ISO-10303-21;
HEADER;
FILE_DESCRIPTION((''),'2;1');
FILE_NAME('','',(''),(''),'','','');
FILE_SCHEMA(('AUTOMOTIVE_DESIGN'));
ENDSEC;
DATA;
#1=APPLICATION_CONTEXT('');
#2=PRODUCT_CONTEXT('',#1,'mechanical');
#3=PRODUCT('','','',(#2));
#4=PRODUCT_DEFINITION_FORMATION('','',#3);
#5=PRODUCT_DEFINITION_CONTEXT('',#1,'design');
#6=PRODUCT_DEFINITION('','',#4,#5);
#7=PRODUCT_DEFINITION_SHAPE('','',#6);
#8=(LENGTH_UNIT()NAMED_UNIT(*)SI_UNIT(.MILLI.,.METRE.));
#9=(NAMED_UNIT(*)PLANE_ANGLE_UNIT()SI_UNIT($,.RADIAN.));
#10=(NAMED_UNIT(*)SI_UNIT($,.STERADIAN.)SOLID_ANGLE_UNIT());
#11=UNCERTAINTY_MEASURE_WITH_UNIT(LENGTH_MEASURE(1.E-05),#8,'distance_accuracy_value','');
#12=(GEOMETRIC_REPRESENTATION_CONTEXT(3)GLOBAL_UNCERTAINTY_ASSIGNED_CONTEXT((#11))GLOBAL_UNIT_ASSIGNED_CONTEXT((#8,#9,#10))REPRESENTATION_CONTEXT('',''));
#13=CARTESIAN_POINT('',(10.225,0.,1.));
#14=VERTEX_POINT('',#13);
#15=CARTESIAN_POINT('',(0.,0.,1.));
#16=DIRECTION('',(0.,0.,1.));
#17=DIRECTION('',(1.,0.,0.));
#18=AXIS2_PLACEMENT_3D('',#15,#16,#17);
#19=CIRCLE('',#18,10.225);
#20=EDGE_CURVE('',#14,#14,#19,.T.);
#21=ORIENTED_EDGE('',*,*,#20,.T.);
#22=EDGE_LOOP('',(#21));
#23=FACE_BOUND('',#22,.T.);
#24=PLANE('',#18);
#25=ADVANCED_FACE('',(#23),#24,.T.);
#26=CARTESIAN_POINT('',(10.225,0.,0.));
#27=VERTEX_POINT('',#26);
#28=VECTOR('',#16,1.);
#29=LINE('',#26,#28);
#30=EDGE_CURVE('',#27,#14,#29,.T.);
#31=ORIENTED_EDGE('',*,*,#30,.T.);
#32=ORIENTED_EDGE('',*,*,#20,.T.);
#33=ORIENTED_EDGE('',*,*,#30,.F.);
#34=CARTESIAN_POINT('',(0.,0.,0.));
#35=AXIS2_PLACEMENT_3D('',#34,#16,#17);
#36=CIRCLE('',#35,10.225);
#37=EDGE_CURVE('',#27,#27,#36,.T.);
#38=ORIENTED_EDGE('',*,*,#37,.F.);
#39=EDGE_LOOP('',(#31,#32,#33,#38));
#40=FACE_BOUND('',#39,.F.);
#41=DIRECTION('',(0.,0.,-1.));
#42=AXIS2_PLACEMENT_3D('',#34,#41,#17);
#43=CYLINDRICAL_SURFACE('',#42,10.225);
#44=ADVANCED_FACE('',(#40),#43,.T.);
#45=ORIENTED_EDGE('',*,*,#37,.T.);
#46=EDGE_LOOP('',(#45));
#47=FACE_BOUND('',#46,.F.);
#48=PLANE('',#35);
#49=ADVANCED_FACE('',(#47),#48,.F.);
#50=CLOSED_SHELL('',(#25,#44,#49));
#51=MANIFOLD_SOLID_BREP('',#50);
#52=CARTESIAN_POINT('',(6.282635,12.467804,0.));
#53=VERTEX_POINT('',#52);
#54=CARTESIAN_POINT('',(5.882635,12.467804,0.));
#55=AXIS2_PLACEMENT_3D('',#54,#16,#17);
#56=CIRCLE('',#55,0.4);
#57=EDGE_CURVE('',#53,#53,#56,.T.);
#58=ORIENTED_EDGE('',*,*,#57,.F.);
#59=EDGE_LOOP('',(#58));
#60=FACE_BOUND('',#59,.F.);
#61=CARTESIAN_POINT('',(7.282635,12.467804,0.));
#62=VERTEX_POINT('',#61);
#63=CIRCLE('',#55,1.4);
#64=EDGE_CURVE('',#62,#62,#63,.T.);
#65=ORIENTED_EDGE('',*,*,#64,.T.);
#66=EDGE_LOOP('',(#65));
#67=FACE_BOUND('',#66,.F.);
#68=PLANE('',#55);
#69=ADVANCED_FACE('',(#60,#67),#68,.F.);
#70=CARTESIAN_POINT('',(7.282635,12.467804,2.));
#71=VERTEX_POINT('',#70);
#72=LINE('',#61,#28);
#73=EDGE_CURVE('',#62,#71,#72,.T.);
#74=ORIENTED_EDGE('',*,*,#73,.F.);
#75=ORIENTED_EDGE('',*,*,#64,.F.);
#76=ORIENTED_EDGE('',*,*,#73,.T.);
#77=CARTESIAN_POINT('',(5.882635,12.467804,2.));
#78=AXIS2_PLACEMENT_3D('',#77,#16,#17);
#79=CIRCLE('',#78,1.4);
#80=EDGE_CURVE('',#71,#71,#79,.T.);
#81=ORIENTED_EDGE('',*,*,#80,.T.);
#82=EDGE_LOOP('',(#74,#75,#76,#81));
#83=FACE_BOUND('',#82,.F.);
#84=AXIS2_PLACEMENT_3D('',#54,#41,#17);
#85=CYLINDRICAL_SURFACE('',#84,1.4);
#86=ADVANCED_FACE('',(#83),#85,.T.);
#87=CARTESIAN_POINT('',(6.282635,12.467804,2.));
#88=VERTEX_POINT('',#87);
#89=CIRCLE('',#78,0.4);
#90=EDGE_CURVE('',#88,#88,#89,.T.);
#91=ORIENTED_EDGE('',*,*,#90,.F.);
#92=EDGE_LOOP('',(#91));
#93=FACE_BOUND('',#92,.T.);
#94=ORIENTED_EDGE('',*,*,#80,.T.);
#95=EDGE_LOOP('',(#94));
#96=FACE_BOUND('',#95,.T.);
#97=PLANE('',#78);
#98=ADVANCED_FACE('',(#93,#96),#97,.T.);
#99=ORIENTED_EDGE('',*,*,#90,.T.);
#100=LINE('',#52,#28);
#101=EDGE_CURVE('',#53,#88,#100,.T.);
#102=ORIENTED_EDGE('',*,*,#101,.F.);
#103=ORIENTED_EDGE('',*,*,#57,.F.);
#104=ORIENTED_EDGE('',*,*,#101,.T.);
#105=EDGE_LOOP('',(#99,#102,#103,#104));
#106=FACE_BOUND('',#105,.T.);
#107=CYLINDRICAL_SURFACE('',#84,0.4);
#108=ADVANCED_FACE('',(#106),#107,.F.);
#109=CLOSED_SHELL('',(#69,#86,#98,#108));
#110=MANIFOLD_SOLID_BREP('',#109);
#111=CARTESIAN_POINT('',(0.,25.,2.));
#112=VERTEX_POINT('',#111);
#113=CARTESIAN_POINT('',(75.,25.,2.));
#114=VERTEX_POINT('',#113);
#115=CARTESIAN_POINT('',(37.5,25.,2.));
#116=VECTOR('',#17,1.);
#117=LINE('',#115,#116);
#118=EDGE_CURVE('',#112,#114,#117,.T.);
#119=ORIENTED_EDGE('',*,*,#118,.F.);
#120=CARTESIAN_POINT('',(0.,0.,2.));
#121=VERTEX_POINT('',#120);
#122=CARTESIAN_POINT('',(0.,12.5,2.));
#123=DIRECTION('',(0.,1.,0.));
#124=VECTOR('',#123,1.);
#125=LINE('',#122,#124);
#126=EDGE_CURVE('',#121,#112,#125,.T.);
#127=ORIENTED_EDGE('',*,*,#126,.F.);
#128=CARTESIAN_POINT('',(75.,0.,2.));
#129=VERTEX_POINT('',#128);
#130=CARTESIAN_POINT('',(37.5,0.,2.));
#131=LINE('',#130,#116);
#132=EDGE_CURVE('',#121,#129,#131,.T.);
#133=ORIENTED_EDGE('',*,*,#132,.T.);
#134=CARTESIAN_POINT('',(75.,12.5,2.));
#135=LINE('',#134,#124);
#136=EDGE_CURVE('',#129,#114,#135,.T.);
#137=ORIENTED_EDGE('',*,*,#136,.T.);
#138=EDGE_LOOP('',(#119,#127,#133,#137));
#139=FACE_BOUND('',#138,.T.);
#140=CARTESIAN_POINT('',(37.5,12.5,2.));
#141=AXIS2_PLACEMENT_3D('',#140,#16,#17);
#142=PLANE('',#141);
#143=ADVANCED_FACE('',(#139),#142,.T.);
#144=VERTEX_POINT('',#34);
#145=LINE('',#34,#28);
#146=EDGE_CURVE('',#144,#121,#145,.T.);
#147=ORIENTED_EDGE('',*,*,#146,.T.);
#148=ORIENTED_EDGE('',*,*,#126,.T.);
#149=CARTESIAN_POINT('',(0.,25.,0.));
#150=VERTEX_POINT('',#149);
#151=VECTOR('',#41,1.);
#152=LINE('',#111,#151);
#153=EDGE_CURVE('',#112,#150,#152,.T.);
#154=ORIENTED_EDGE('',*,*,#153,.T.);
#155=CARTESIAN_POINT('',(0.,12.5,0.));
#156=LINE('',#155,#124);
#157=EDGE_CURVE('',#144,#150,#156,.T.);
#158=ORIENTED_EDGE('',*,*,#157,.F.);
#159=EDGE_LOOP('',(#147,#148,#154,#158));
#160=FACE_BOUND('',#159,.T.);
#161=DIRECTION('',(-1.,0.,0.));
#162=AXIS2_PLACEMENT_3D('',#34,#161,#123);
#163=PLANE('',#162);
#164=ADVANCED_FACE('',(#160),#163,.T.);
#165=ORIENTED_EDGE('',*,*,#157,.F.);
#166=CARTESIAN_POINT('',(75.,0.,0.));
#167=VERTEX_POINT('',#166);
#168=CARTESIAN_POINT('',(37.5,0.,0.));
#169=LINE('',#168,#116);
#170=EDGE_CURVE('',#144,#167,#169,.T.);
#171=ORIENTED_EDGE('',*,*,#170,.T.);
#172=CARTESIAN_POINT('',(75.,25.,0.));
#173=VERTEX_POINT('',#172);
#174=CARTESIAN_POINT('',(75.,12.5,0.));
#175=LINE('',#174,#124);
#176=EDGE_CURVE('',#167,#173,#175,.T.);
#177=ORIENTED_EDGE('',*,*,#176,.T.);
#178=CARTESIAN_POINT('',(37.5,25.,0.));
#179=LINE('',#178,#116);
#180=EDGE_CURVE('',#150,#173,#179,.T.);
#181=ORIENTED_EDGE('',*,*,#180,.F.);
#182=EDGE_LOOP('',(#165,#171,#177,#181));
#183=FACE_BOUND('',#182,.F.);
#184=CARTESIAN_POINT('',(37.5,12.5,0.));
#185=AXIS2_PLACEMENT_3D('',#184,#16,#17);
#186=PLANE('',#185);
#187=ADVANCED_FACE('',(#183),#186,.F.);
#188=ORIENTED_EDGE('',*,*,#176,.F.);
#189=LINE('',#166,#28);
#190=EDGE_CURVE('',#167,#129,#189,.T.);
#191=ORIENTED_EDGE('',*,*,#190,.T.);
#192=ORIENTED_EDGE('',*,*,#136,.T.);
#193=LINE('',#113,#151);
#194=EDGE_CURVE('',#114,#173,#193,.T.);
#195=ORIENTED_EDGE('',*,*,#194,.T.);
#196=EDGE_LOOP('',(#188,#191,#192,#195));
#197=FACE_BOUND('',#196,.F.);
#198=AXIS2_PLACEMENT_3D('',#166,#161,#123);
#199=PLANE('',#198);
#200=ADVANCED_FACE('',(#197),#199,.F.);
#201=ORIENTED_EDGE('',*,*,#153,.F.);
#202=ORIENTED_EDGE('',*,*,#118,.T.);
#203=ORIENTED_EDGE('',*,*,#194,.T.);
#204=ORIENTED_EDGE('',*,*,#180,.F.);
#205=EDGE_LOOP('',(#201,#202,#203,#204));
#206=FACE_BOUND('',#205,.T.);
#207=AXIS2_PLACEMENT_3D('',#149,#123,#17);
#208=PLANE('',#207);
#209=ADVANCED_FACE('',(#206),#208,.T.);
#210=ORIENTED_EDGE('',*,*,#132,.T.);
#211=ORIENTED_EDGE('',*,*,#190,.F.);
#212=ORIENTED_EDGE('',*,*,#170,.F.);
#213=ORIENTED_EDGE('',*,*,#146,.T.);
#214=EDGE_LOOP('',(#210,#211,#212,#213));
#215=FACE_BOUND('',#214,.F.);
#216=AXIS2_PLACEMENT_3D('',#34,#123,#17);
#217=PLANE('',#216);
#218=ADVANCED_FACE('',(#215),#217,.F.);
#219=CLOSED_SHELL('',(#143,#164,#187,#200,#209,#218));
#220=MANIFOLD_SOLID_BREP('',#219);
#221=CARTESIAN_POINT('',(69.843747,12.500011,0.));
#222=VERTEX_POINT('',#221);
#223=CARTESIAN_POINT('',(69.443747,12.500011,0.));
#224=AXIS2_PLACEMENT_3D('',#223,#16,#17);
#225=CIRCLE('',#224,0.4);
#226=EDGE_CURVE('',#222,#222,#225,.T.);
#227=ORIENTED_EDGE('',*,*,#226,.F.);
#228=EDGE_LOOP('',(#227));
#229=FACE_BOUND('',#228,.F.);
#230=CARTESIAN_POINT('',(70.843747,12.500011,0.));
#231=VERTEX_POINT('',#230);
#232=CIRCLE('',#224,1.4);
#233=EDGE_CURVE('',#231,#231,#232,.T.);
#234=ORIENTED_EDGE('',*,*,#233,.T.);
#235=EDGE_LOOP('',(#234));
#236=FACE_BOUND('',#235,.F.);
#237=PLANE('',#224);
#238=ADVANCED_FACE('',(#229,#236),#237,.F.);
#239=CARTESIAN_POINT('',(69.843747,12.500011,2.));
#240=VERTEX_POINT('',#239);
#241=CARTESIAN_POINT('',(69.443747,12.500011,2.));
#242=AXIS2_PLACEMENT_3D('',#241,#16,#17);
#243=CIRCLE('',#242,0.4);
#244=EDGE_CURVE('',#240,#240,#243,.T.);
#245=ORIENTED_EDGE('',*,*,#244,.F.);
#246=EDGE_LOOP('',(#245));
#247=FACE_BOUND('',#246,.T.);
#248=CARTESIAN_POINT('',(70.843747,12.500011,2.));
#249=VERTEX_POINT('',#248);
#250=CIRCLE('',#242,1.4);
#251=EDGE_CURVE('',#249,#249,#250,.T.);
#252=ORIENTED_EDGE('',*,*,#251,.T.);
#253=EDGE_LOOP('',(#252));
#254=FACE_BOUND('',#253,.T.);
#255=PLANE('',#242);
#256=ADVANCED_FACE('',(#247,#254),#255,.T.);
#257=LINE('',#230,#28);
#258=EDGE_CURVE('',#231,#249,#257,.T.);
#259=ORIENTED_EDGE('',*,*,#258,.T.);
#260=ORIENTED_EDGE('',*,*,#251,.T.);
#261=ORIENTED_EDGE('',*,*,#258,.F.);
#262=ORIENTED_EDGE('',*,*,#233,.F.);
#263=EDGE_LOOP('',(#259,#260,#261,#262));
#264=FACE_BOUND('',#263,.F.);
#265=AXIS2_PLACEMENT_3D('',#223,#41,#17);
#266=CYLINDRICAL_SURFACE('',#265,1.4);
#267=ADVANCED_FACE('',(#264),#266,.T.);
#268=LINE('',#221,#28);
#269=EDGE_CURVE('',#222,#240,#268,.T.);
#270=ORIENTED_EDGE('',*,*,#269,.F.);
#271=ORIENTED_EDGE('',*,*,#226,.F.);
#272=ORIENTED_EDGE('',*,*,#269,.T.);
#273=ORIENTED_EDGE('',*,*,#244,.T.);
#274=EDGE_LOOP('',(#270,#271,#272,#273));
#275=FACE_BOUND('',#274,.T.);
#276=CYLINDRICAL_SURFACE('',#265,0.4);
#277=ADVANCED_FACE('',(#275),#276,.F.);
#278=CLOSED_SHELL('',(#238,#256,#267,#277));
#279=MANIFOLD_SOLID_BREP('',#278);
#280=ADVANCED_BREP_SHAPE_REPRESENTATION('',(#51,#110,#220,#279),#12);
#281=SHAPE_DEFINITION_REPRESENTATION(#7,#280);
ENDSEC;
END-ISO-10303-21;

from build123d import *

# Parameters (mm, degrees)
F0_W     = 75
F0_H     = 25
F4_DEPTH = 0.4
F3_W     = 75
F3_H     = 25
F3_R     = 10.25
F5_DEPTH = 1.6
F2_W     = 75
F2_H     = 25
F6_DEPTH = 2
F1_R     = 1.4
F1_R_2   = 0.4
F7_DEPTH = 2
F8_R     = 10.225
F9_DEPTH = 1


with BuildPart() as f4:
    # F0 (on Top) → F4 (new body)
    with BuildSketch(Plane.XY):
        with Locations((37.5, 12.5)):
            Rectangle(F0_W, F0_H)
    extrude(amount=F4_DEPTH)

    # F3 (on Top) → F5 (join)
    with BuildSketch(Plane.XY):
        with Locations((37.5, 12.5)):
            Rectangle(F3_W, F3_H)
        with Locations((41.7743064463, 12.5000113621)):
            Circle(F3_R, mode=Mode.SUBTRACT)
    extrude(amount=F5_DEPTH)

    # F2 (on Top) → F6 (join)
    with BuildSketch(Plane.XY):
        with Locations((37.5, 12.5)):
            Rectangle(F2_W, F2_H)
        with BuildLine():
            Line((20.9633884676, 8.163), (20.9633884676, 9.0255))
            ThreePointArc((20.9633884676, 9.0255), (21.0805457551, 9.3083427125), (21.3633884676, 9.4255))
            Line((21.3633884676, 9.4255), (24.7770920396, 9.4255))
            Line((24.7770920396, 9.4255), (32.905688939, 7.3625277004))
            Line((32.905688939, 7.3625277004), (24.7770920396, 5.3))
            Line((24.7770920396, 5.3), (21.3633884676, 5.3))
            ThreePointArc((21.3633884676, 5.3), (21.0805457551, 5.4171572875), (20.9633884676, 5.7))
            Line((20.9633884676, 5.7), (20.9633884676, 6.563))
            ThreePointArc((20.9633884676, 6.563), (20.6146360295, 7.0607260803), (20.0873884676, 7.363))
            ThreePointArc((20.0873884676, 7.363), (20.6146360295, 7.6652739197), (20.9633884676, 8.163))
        make_face(mode=Mode.SUBTRACT)
        with BuildLine():
            ThreePointArc((17.3638739623, 7.863), (17.0810312498, 7.9801572875), (16.9638739623, 8.263))
            Line((16.9638739623, 8.263), (16.9638739623, 11.5626839529))
            ThreePointArc((16.9638739623, 11.5626839529), (16.5400607006, 12.1874218401), (15.8528853208, 12.5))
            ThreePointArc((15.8528853208, 12.5), (16.6743001007, 13.0131119919), (16.9638739623, 13.9373160471))
            Line((16.9638739623, 13.9373160471), (16.9638739623, 16.7375))
            ThreePointArc((16.9638739623, 16.7375), (17.0810312498, 17.0203427125), (17.3638739623, 17.1375))
            Line((17.3638739623, 17.1375), (19.5638739623, 17.1375))
            ThreePointArc((19.5638739623, 17.1375), (19.8467166748, 17.0203427125), (19.9638739623, 16.7375))
            Line((19.9638739623, 16.7375), (19.9638739623, 15.5745))
            Line((19.9638739623, 15.5745), (19.9638739623, 15.0745))
            Line((19.9638739623, 15.0745), (19.9638739623, 14.9745))
            ThreePointArc((19.9638739623, 14.9745), (20.0810312498, 14.6916572875), (20.3638739623, 14.5745))
            Line((20.3638739623, 14.5745), (24.7770920396, 14.5745))
            Line((24.7770920396, 14.5745), (31.5258568066, 12.49955))
            Line((31.5258568066, 12.49955), (24.7770920396, 10.4255))
            Line((24.7770920396, 10.4255), (20.3633884676, 10.4255))
            ThreePointArc((20.3633884676, 10.4255), (20.0805457551, 10.3083427125), (19.9633884676, 10.0255))
            Line((19.9633884676, 10.0255), (19.9633884676, 9.9255))
            Line((19.9633884676, 9.9255), (19.9633884676, 9.4255))
            Line((19.9633884676, 9.4255), (19.9633884676, 8.263))
            ThreePointArc((19.9633884676, 8.263), (19.8462311801, 7.9801572875), (19.5633884676, 7.863))
            Line((19.5633884676, 7.863), (17.3638739623, 7.863))
        make_face(mode=Mode.SUBTRACT)
        with BuildLine():
            ThreePointArc((21.3638739623, 15.5745), (21.0810312498, 15.6916572875), (20.9638739623, 15.9745))
            Line((20.9638739623, 15.9745), (20.9638739623, 16.8364493074))
            ThreePointArc((20.9638739623, 16.8364493074), (20.61521579, 17.3303099873), (20.0904036045, 17.6303650859))
            ThreePointArc((20.0904036045, 17.6303650859), (20.61521579, 17.9304201845), (20.9638739623, 18.4242808644))
            Line((20.9638739623, 18.4242808644), (20.9638739623, 19.3))
            ThreePointArc((20.9638739623, 19.3), (21.0810312498, 19.5828427125), (21.3638739623, 19.7))
            Line((21.3638739623, 19.7), (24.7770920396, 19.7))
            Line((24.7770920396, 19.7), (32.9031571746, 17.6303650859))
            Line((32.9031571746, 17.6303650859), (24.7770920396, 15.5745))
            Line((24.7770920396, 15.5745), (21.3638739623, 15.5745))
        make_face(mode=Mode.SUBTRACT)
        with BuildLine():
            ThreePointArc((21.3633884676, 9.4255), (21.0805457551, 9.3083427125), (20.9633884676, 9.0255))
            Line((20.9633884676, 9.0255), (20.9633884676, 8.163))
            ThreePointArc((20.9633884676, 8.163), (20.6146360295, 7.6652739197), (20.0873884676, 7.363))
            ThreePointArc((20.0873884676, 7.363), (20.6146360295, 7.0607260803), (20.9633884676, 6.563))
            Line((20.9633884676, 6.563), (20.9633884676, 5.7))
            ThreePointArc((20.9633884676, 5.7), (21.0805457551, 5.4171572875), (21.3633884676, 5.3))
            Line((21.3633884676, 5.3), (24.7770920396, 5.3))
            Line((24.7770920396, 5.3), (32.905688939, 7.3625277004))
            Line((32.905688939, 7.3625277004), (24.7770920396, 9.4255))
            Line((24.7770920396, 9.4255), (21.3633884676, 9.4255))
        make_face()
        with BuildLine():
            Line((16.9638739623, 11.5626839529), (16.9638739623, 8.263))
            ThreePointArc((16.9638739623, 8.263), (17.0810312498, 7.9801572875), (17.3638739623, 7.863))
            Line((17.3638739623, 7.863), (19.5633884676, 7.863))
            ThreePointArc((19.5633884676, 7.863), (19.8462311801, 7.9801572875), (19.9633884676, 8.263))
            Line((19.9633884676, 8.263), (19.9633884676, 9.4255))
            Line((19.9633884676, 9.4255), (19.9633884676, 9.9255))
            Line((19.9633884676, 9.9255), (19.9633884676, 10.0255))
            ThreePointArc((19.9633884676, 10.0255), (20.0805457551, 10.3083427125), (20.3633884676, 10.4255))
            Line((20.3633884676, 10.4255), (24.7770920396, 10.4255))
            Line((24.7770920396, 10.4255), (31.5258568066, 12.49955))
            Line((31.5258568066, 12.49955), (24.7770920396, 14.5745))
            Line((24.7770920396, 14.5745), (20.3638739623, 14.5745))
            ThreePointArc((20.3638739623, 14.5745), (20.0810312498, 14.6916572875), (19.9638739623, 14.9745))
            Line((19.9638739623, 14.9745), (19.9638739623, 15.0745))
            Line((19.9638739623, 15.0745), (19.9638739623, 15.5745))
            Line((19.9638739623, 15.5745), (19.9638739623, 16.7375))
            ThreePointArc((19.9638739623, 16.7375), (19.8467166748, 17.0203427125), (19.5638739623, 17.1375))
            Line((19.5638739623, 17.1375), (17.3638739623, 17.1375))
            ThreePointArc((17.3638739623, 17.1375), (17.0810312498, 17.0203427125), (16.9638739623, 16.7375))
            Line((16.9638739623, 16.7375), (16.9638739623, 13.9373160471))
            ThreePointArc((16.9638739623, 13.9373160471), (16.6743001007, 13.0131119919), (15.8528853208, 12.5))
            ThreePointArc((15.8528853208, 12.5), (16.5400607006, 12.1874218401), (16.9638739623, 11.5626839529))
        make_face()
        with BuildLine():
            Line((20.9638739623, 16.8364493074), (20.9638739623, 15.9745))
            ThreePointArc((20.9638739623, 15.9745), (21.0810312498, 15.6916572875), (21.3638739623, 15.5745))
            Line((21.3638739623, 15.5745), (24.7770920396, 15.5745))
            Line((24.7770920396, 15.5745), (32.9031571746, 17.6303650859))
            Line((32.9031571746, 17.6303650859), (24.7770920396, 19.7))
            Line((24.7770920396, 19.7), (21.3638739623, 19.7))
            ThreePointArc((21.3638739623, 19.7), (21.0810312498, 19.5828427125), (20.9638739623, 19.3))
            Line((20.9638739623, 19.3), (20.9638739623, 18.4242808644))
            ThreePointArc((20.9638739623, 18.4242808644), (20.61521579, 17.9304201845), (20.0904036045, 17.6303650859))
            ThreePointArc((20.0904036045, 17.6303650859), (20.61521579, 17.3303099873), (20.9638739623, 16.8364493074))
        make_face()
    extrude(amount=F6_DEPTH)


with BuildPart() as f7:
    # F1 (on Top) → F7 (new body)
    with BuildSketch(Plane.XY):
        with Locations((5.882635247, 12.4678043649)):
            Circle(F1_R)
        with Locations((5.882635247, 12.4678043649)):
            Circle(F1_R_2, mode=Mode.SUBTRACT)
    extrude(amount=F7_DEPTH)


with BuildPart() as f7b:
    # F1 (on Top) → F7, piece 2 (new body)
    with BuildSketch(Plane.XY):
        with Locations((69.4437474012, 12.5000113621)):
            Circle(F1_R)
        with Locations((69.4437474012, 12.5000113621)):
            Circle(F1_R_2, mode=Mode.SUBTRACT)
    extrude(amount=F7_DEPTH)


with BuildPart() as f9:
    # F8 (on Top) → F9 (new body)
    with BuildSketch(Plane.XY):
        Circle(F8_R)
    extrude(amount=F9_DEPTH)


solid = Compound([f4.part, f7.part, f7b.part, f9.part])
